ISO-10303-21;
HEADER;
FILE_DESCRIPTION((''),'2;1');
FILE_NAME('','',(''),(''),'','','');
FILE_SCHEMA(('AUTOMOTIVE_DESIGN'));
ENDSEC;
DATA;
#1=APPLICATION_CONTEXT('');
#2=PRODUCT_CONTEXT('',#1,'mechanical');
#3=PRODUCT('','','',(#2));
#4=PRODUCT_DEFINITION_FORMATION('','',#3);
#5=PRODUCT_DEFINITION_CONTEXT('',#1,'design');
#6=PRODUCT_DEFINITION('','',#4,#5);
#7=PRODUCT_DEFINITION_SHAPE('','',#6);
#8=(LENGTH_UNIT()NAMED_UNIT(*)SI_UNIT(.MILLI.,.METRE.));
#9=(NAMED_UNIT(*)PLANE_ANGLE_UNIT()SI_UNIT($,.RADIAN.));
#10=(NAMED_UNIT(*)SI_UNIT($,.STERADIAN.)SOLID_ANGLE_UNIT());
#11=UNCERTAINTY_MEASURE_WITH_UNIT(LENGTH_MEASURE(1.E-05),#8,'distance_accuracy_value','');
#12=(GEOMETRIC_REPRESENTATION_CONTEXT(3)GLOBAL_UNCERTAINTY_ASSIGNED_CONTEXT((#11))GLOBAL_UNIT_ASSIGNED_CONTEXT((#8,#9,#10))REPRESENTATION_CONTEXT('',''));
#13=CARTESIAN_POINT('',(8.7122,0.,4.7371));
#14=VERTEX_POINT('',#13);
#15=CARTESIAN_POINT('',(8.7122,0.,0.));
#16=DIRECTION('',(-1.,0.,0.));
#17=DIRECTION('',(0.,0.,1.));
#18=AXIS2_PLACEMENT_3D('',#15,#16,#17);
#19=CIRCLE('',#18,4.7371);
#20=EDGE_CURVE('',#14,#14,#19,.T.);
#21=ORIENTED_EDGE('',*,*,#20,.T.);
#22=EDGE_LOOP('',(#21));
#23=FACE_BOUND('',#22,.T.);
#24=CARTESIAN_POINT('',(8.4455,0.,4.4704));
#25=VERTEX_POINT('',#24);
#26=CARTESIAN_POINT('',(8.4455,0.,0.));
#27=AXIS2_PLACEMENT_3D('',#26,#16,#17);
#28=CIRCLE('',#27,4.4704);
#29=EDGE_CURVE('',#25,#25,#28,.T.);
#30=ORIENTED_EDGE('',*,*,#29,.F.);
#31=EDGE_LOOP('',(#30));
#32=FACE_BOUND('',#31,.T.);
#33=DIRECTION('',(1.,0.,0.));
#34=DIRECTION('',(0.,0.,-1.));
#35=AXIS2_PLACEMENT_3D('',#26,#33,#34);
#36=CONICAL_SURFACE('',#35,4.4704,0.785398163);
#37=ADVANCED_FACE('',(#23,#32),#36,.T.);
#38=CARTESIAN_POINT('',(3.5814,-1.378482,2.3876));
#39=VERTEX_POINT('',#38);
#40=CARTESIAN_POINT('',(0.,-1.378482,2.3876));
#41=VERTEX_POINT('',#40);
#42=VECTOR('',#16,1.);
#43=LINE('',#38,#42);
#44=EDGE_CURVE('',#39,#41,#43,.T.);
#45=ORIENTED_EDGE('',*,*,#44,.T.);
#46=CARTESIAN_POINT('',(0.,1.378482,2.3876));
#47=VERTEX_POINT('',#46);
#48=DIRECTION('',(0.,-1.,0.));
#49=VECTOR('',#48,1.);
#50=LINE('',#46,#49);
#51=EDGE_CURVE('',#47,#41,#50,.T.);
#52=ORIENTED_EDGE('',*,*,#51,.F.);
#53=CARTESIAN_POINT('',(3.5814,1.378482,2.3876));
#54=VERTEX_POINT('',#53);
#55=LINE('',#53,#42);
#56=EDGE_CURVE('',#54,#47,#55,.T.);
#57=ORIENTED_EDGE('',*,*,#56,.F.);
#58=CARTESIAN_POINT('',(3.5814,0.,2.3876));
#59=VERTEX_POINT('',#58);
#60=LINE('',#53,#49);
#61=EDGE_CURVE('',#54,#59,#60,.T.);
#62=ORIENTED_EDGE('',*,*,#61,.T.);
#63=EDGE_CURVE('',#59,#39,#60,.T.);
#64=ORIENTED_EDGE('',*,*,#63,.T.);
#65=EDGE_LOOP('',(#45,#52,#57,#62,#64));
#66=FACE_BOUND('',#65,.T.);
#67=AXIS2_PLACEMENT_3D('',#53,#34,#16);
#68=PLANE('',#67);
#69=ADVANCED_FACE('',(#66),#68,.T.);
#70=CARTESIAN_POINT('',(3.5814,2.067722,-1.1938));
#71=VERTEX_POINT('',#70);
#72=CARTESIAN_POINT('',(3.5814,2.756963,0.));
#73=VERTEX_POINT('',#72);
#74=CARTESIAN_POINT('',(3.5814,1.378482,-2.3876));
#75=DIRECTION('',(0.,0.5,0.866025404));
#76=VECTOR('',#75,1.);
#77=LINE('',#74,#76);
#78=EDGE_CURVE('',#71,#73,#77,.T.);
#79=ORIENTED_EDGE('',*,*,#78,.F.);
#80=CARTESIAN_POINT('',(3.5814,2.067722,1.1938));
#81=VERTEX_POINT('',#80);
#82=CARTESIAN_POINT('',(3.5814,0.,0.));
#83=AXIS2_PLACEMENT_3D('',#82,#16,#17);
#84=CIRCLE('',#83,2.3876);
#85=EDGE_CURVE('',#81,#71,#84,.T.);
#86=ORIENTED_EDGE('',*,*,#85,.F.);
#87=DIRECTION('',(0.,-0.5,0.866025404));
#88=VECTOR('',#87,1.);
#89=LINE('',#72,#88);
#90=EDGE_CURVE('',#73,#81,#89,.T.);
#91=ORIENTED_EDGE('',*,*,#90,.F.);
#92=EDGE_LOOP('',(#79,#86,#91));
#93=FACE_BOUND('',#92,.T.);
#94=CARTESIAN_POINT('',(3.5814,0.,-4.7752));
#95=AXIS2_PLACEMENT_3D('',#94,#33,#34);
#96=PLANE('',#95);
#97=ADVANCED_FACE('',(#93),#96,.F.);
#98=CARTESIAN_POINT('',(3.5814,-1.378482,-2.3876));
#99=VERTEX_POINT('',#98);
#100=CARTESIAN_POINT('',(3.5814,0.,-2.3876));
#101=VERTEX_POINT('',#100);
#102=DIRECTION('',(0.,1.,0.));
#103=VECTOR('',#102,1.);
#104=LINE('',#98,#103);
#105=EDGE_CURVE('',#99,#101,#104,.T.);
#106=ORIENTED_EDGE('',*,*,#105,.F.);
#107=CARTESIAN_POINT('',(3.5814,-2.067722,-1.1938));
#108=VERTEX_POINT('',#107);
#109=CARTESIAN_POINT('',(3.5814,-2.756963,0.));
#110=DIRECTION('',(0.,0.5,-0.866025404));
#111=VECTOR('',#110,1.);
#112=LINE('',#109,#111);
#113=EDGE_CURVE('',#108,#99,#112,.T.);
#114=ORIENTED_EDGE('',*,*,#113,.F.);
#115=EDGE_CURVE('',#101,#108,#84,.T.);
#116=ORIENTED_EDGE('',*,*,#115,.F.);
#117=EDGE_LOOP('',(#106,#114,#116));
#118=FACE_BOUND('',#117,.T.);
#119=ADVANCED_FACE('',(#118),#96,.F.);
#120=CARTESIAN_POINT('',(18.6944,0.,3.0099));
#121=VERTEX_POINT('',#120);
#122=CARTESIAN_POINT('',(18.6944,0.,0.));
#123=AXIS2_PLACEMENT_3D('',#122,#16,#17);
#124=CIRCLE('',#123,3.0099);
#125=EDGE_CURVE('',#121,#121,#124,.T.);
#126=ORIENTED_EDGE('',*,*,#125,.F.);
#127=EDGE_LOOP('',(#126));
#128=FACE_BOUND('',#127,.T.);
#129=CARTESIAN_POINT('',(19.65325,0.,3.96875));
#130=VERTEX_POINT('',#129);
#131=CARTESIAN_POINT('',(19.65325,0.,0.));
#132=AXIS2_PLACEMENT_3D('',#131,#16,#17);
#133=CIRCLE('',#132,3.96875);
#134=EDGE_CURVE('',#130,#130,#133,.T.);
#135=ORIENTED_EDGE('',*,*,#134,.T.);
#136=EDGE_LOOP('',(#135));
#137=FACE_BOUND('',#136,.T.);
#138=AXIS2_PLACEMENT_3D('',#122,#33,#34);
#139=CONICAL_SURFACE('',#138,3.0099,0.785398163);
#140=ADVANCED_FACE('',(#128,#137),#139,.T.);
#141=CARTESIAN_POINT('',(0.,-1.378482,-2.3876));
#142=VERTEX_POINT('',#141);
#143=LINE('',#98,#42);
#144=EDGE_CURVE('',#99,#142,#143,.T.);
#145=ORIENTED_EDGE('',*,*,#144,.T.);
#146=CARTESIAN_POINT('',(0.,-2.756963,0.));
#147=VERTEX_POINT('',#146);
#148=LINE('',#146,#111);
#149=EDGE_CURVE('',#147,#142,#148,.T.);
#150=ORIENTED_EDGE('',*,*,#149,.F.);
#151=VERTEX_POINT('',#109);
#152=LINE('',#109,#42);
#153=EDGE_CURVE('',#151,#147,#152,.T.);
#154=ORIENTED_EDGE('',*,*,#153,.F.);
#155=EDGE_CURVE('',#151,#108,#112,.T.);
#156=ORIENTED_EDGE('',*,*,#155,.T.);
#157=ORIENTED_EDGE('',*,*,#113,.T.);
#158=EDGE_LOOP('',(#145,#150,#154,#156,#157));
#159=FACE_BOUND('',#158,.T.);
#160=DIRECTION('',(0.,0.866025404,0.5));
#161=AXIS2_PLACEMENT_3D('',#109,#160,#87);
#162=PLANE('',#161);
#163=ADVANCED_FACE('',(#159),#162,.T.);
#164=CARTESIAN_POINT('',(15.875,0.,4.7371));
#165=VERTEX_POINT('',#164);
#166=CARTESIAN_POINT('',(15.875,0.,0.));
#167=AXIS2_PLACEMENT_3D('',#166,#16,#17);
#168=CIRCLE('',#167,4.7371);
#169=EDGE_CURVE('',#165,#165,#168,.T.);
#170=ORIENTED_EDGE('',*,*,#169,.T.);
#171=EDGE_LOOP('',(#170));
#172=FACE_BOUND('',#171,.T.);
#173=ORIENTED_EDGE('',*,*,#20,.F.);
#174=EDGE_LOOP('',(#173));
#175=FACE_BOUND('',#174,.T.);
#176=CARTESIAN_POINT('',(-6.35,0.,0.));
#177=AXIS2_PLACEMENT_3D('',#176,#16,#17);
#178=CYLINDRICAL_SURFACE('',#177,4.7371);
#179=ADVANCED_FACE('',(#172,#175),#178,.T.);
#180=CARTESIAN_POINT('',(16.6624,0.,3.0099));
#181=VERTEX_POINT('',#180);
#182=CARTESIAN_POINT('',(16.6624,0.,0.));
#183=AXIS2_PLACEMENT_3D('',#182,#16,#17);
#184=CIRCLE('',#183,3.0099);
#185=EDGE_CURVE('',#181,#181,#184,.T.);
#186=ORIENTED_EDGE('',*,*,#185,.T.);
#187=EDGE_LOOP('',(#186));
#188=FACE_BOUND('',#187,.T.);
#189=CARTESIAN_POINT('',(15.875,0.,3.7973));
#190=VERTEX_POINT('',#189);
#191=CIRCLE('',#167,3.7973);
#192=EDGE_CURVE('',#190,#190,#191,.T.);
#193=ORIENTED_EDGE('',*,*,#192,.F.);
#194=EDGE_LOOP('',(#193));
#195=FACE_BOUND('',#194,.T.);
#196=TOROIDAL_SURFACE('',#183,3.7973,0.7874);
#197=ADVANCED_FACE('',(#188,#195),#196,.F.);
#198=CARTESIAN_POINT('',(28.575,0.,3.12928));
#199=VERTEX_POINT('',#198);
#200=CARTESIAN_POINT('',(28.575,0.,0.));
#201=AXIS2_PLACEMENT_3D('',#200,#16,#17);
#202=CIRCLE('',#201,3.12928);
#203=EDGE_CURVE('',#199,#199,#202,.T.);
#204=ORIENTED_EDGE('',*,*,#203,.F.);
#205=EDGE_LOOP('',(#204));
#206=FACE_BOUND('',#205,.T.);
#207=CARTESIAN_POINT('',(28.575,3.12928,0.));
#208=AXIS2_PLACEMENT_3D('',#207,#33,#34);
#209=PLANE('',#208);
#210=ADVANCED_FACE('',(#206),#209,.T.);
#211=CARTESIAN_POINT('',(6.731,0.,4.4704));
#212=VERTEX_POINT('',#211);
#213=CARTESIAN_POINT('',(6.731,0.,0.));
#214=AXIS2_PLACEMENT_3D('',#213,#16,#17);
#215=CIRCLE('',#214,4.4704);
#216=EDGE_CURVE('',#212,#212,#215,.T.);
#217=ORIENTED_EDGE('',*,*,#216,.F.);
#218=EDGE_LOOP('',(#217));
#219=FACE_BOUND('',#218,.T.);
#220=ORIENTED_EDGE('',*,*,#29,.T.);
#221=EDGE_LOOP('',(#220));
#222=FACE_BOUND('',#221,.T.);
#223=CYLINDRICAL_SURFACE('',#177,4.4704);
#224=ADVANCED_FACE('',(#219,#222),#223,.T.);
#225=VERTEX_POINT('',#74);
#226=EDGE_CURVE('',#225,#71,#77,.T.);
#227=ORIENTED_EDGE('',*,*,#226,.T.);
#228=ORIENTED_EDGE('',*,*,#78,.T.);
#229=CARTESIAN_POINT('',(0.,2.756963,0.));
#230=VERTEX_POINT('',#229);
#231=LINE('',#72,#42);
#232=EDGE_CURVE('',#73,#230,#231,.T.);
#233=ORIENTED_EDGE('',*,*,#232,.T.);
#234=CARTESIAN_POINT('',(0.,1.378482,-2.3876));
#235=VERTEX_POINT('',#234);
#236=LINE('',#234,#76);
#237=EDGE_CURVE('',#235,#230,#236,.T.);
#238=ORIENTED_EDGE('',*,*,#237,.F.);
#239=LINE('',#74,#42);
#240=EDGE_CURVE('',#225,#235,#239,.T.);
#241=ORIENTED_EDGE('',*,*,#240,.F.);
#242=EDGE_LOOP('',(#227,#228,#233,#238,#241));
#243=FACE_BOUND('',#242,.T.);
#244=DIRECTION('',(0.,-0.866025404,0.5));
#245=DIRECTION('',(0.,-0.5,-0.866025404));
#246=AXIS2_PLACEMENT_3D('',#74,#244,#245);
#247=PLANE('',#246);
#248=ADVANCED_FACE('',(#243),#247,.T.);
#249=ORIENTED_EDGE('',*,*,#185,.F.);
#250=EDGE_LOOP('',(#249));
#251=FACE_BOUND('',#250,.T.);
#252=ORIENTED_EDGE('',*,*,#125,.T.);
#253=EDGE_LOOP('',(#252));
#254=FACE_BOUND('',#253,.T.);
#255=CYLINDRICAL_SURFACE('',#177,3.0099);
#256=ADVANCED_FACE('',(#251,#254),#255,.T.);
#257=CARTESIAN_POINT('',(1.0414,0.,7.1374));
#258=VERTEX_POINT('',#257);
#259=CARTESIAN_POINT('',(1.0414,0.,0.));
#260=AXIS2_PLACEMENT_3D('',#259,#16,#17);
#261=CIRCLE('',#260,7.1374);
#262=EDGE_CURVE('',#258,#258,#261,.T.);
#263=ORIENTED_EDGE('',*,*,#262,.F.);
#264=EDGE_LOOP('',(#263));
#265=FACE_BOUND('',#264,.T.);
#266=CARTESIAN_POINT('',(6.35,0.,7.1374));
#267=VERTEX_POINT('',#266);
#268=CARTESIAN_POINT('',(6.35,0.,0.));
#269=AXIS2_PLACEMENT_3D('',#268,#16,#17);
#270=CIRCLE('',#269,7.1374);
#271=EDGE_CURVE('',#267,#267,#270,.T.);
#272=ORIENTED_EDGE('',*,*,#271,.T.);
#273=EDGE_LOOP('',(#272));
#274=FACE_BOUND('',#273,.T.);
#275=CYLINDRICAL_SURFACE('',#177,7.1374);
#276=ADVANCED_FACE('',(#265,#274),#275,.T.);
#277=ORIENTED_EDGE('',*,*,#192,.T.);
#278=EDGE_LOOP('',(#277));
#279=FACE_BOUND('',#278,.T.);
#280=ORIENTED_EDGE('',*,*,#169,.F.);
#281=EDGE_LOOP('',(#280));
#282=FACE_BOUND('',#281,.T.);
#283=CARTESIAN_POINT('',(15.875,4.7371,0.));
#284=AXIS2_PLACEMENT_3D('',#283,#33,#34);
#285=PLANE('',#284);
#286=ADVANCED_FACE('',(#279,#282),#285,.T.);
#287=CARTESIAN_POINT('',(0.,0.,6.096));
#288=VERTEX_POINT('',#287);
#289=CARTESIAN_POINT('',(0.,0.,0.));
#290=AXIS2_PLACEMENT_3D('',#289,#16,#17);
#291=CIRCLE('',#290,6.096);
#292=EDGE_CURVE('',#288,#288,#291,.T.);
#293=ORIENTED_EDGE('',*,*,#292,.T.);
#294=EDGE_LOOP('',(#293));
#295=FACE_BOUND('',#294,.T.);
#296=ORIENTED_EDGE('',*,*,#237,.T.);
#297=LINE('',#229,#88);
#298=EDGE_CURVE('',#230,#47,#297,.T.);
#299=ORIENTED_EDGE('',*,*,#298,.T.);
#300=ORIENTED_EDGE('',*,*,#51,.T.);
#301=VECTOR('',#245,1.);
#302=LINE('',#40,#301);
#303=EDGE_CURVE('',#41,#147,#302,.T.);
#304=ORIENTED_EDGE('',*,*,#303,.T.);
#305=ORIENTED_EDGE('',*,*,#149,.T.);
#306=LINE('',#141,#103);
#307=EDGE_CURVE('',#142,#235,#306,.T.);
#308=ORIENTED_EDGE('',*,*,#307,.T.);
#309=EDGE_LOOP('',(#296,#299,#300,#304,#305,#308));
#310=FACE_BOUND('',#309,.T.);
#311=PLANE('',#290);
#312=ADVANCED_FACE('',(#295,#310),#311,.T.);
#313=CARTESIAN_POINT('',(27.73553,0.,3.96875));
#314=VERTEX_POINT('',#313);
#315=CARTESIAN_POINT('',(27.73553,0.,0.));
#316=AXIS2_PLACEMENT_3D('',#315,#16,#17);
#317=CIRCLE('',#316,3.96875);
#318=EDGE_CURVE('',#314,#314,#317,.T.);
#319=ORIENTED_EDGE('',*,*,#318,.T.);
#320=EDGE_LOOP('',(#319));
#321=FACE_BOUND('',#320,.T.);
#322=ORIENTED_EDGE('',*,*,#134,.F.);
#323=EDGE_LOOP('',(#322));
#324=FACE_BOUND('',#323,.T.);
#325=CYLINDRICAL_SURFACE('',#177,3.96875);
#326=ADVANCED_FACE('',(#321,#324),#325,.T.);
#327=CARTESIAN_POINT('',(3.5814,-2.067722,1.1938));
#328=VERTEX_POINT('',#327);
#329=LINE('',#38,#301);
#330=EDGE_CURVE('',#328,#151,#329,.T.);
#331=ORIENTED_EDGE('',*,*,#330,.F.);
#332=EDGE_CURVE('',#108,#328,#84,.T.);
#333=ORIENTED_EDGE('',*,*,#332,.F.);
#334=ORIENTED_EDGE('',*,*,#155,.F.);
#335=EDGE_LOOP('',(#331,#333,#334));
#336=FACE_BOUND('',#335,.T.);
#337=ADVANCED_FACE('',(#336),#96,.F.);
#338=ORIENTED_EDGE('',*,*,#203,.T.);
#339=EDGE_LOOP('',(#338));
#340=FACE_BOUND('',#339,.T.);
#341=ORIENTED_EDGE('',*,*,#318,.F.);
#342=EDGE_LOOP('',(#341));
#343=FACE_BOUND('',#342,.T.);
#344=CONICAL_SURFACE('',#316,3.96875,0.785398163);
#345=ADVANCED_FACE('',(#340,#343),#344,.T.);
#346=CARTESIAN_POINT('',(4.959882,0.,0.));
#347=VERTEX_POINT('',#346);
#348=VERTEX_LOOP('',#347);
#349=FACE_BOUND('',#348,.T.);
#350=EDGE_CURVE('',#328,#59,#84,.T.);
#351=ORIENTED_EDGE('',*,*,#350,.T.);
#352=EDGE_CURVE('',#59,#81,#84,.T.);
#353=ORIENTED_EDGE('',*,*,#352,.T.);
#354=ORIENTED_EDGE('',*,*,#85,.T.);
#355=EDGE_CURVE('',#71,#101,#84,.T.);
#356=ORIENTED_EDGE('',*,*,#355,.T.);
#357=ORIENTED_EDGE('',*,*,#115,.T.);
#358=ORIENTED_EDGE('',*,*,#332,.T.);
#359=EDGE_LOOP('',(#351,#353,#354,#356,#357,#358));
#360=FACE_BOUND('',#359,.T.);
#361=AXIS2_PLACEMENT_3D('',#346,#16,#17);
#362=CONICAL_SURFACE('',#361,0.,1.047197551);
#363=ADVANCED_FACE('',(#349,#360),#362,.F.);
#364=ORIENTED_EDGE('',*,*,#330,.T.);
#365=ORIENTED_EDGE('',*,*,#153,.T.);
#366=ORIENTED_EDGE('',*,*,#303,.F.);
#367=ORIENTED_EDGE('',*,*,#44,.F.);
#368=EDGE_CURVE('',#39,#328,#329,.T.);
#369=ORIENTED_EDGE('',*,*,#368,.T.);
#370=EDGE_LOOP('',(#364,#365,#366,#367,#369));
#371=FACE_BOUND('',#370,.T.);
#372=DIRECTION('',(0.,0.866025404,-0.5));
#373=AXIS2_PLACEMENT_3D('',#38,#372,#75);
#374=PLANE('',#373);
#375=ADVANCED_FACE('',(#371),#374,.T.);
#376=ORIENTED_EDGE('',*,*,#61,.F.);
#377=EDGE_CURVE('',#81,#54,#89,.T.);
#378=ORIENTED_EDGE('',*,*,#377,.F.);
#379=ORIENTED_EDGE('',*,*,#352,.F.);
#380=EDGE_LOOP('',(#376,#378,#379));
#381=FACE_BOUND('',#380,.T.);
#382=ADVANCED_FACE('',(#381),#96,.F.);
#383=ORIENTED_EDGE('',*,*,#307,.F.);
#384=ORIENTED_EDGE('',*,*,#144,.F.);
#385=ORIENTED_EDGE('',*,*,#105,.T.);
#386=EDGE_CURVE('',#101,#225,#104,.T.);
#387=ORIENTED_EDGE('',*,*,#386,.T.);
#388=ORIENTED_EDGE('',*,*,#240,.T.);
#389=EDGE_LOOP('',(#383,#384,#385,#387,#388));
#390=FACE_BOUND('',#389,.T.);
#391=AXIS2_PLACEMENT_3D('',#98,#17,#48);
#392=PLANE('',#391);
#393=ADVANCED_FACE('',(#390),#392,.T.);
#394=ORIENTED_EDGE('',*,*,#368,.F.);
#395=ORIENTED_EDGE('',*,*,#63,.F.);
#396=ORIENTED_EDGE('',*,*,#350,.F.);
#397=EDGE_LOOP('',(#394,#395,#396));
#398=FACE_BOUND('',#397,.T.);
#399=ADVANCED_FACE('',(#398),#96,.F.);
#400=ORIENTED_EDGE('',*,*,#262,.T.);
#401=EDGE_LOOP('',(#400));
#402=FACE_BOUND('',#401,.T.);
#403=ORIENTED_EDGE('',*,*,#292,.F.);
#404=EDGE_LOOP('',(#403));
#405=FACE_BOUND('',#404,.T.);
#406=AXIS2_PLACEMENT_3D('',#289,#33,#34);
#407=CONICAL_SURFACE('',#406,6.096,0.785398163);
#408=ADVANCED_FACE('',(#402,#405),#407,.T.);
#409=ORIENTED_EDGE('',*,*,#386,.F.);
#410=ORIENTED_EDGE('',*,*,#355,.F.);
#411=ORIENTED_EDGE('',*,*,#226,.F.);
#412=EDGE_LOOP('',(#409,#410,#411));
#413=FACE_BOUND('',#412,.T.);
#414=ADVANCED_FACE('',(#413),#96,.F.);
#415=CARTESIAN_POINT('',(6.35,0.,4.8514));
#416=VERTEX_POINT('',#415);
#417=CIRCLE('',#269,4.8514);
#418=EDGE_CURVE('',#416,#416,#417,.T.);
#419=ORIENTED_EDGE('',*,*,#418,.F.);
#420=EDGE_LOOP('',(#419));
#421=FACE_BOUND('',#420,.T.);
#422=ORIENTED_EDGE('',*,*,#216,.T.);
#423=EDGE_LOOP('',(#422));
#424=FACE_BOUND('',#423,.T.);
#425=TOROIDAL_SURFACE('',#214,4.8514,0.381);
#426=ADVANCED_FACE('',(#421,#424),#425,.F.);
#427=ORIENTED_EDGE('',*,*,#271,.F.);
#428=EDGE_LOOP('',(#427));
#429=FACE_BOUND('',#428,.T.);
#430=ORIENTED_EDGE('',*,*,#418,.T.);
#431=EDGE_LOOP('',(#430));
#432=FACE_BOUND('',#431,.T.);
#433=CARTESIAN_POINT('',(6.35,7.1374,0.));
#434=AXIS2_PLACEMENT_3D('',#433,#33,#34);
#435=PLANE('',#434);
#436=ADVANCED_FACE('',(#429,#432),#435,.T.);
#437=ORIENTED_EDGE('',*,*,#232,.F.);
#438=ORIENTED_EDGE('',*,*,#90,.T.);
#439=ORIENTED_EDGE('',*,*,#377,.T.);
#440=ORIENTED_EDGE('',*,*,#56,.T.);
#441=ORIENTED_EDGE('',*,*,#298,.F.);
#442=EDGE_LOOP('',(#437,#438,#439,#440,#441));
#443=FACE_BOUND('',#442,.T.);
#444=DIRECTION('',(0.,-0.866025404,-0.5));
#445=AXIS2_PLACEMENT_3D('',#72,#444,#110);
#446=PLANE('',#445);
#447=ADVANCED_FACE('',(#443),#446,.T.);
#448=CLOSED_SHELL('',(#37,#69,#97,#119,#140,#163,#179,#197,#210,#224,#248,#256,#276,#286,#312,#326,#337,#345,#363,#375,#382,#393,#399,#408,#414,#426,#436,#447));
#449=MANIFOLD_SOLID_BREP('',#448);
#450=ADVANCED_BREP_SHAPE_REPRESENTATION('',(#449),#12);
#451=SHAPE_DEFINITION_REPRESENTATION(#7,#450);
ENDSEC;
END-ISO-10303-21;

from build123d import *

# Parameters (mm, degrees)
HEX_2_DEPTH = 3.5814


# Read off the part's stored shape, not the designer's step: ThreadSchematic
with BuildPart() as part:
    # ThreadSchematic outline → ThreadSchematic (revolve)
    with BuildSketch(Plane.YX):
        with BuildLine():
            Line((0, 28.575), (0, 0))
            Line((0, 0), (6.096, 0))
            Line((6.096, 0), (7.1374, 1.0414))
            Line((7.1374, 1.0414), (7.1374, 6.35))
            Line((7.1374, 6.35), (4.8514, 6.35))
            ThreePointArc((4.8514, 6.35), (4.581992316, 6.461592316), (4.4704, 6.731))
            Line((4.4704, 6.731), (4.4704, 8.4455))
            Line((4.4704, 8.4455), (4.7371, 8.7122))
            Line((4.7371, 8.7122), (4.7371, 15.875))
            Line((4.7371, 15.875), (3.7973, 15.875))
            ThreePointArc((3.7973, 15.875), (3.24052412, 16.10562412), (3.0099, 16.6624))
            Line((3.0099, 16.6624), (3.0099, 18.6944))
            Line((3.0099, 18.6944), (3.96875, 19.65325))
            Line((3.96875, 19.65325), (3.96875, 27.73553))
            Line((3.96875, 27.73553), (3.12928, 28.575))
            Line((3.12928, 28.575), (0, 28.575))
        make_face()
    revolve(axis=Axis((0, 0, 0), (1, 0, 0)))

    # Sketch2 → PreBroach (revolve, cut)
    with BuildSketch(Plane.XY, mode=Mode.PRIVATE) as prebroach_sk:
        Polygon((0, 2.3876), (3.5814, 2.3876), (4.959881503, 0), (0, 0), align=None)
    revolve(prebroach_sk.sketch.rotate(Axis((0, 0, 0), (1, 0, 0)), 90), axis=Axis((0, 0, 0), (1, 0, 0)), mode=Mode.SUBTRACT)

    # Sketch3 → Hex 2 (cut)
    with BuildSketch(Plane.ZY):
        Polygon((-2.3876, -1.378481503), (-2.3876, 1.378481503), (0, 2.756963005), (2.3876, 1.378481503), (2.3876, -1.378481503), (0, -2.756963005), align=None)
    extrude(amount=-HEX_2_DEPTH, mode=Mode.SUBTRACT)


solid = part.part
